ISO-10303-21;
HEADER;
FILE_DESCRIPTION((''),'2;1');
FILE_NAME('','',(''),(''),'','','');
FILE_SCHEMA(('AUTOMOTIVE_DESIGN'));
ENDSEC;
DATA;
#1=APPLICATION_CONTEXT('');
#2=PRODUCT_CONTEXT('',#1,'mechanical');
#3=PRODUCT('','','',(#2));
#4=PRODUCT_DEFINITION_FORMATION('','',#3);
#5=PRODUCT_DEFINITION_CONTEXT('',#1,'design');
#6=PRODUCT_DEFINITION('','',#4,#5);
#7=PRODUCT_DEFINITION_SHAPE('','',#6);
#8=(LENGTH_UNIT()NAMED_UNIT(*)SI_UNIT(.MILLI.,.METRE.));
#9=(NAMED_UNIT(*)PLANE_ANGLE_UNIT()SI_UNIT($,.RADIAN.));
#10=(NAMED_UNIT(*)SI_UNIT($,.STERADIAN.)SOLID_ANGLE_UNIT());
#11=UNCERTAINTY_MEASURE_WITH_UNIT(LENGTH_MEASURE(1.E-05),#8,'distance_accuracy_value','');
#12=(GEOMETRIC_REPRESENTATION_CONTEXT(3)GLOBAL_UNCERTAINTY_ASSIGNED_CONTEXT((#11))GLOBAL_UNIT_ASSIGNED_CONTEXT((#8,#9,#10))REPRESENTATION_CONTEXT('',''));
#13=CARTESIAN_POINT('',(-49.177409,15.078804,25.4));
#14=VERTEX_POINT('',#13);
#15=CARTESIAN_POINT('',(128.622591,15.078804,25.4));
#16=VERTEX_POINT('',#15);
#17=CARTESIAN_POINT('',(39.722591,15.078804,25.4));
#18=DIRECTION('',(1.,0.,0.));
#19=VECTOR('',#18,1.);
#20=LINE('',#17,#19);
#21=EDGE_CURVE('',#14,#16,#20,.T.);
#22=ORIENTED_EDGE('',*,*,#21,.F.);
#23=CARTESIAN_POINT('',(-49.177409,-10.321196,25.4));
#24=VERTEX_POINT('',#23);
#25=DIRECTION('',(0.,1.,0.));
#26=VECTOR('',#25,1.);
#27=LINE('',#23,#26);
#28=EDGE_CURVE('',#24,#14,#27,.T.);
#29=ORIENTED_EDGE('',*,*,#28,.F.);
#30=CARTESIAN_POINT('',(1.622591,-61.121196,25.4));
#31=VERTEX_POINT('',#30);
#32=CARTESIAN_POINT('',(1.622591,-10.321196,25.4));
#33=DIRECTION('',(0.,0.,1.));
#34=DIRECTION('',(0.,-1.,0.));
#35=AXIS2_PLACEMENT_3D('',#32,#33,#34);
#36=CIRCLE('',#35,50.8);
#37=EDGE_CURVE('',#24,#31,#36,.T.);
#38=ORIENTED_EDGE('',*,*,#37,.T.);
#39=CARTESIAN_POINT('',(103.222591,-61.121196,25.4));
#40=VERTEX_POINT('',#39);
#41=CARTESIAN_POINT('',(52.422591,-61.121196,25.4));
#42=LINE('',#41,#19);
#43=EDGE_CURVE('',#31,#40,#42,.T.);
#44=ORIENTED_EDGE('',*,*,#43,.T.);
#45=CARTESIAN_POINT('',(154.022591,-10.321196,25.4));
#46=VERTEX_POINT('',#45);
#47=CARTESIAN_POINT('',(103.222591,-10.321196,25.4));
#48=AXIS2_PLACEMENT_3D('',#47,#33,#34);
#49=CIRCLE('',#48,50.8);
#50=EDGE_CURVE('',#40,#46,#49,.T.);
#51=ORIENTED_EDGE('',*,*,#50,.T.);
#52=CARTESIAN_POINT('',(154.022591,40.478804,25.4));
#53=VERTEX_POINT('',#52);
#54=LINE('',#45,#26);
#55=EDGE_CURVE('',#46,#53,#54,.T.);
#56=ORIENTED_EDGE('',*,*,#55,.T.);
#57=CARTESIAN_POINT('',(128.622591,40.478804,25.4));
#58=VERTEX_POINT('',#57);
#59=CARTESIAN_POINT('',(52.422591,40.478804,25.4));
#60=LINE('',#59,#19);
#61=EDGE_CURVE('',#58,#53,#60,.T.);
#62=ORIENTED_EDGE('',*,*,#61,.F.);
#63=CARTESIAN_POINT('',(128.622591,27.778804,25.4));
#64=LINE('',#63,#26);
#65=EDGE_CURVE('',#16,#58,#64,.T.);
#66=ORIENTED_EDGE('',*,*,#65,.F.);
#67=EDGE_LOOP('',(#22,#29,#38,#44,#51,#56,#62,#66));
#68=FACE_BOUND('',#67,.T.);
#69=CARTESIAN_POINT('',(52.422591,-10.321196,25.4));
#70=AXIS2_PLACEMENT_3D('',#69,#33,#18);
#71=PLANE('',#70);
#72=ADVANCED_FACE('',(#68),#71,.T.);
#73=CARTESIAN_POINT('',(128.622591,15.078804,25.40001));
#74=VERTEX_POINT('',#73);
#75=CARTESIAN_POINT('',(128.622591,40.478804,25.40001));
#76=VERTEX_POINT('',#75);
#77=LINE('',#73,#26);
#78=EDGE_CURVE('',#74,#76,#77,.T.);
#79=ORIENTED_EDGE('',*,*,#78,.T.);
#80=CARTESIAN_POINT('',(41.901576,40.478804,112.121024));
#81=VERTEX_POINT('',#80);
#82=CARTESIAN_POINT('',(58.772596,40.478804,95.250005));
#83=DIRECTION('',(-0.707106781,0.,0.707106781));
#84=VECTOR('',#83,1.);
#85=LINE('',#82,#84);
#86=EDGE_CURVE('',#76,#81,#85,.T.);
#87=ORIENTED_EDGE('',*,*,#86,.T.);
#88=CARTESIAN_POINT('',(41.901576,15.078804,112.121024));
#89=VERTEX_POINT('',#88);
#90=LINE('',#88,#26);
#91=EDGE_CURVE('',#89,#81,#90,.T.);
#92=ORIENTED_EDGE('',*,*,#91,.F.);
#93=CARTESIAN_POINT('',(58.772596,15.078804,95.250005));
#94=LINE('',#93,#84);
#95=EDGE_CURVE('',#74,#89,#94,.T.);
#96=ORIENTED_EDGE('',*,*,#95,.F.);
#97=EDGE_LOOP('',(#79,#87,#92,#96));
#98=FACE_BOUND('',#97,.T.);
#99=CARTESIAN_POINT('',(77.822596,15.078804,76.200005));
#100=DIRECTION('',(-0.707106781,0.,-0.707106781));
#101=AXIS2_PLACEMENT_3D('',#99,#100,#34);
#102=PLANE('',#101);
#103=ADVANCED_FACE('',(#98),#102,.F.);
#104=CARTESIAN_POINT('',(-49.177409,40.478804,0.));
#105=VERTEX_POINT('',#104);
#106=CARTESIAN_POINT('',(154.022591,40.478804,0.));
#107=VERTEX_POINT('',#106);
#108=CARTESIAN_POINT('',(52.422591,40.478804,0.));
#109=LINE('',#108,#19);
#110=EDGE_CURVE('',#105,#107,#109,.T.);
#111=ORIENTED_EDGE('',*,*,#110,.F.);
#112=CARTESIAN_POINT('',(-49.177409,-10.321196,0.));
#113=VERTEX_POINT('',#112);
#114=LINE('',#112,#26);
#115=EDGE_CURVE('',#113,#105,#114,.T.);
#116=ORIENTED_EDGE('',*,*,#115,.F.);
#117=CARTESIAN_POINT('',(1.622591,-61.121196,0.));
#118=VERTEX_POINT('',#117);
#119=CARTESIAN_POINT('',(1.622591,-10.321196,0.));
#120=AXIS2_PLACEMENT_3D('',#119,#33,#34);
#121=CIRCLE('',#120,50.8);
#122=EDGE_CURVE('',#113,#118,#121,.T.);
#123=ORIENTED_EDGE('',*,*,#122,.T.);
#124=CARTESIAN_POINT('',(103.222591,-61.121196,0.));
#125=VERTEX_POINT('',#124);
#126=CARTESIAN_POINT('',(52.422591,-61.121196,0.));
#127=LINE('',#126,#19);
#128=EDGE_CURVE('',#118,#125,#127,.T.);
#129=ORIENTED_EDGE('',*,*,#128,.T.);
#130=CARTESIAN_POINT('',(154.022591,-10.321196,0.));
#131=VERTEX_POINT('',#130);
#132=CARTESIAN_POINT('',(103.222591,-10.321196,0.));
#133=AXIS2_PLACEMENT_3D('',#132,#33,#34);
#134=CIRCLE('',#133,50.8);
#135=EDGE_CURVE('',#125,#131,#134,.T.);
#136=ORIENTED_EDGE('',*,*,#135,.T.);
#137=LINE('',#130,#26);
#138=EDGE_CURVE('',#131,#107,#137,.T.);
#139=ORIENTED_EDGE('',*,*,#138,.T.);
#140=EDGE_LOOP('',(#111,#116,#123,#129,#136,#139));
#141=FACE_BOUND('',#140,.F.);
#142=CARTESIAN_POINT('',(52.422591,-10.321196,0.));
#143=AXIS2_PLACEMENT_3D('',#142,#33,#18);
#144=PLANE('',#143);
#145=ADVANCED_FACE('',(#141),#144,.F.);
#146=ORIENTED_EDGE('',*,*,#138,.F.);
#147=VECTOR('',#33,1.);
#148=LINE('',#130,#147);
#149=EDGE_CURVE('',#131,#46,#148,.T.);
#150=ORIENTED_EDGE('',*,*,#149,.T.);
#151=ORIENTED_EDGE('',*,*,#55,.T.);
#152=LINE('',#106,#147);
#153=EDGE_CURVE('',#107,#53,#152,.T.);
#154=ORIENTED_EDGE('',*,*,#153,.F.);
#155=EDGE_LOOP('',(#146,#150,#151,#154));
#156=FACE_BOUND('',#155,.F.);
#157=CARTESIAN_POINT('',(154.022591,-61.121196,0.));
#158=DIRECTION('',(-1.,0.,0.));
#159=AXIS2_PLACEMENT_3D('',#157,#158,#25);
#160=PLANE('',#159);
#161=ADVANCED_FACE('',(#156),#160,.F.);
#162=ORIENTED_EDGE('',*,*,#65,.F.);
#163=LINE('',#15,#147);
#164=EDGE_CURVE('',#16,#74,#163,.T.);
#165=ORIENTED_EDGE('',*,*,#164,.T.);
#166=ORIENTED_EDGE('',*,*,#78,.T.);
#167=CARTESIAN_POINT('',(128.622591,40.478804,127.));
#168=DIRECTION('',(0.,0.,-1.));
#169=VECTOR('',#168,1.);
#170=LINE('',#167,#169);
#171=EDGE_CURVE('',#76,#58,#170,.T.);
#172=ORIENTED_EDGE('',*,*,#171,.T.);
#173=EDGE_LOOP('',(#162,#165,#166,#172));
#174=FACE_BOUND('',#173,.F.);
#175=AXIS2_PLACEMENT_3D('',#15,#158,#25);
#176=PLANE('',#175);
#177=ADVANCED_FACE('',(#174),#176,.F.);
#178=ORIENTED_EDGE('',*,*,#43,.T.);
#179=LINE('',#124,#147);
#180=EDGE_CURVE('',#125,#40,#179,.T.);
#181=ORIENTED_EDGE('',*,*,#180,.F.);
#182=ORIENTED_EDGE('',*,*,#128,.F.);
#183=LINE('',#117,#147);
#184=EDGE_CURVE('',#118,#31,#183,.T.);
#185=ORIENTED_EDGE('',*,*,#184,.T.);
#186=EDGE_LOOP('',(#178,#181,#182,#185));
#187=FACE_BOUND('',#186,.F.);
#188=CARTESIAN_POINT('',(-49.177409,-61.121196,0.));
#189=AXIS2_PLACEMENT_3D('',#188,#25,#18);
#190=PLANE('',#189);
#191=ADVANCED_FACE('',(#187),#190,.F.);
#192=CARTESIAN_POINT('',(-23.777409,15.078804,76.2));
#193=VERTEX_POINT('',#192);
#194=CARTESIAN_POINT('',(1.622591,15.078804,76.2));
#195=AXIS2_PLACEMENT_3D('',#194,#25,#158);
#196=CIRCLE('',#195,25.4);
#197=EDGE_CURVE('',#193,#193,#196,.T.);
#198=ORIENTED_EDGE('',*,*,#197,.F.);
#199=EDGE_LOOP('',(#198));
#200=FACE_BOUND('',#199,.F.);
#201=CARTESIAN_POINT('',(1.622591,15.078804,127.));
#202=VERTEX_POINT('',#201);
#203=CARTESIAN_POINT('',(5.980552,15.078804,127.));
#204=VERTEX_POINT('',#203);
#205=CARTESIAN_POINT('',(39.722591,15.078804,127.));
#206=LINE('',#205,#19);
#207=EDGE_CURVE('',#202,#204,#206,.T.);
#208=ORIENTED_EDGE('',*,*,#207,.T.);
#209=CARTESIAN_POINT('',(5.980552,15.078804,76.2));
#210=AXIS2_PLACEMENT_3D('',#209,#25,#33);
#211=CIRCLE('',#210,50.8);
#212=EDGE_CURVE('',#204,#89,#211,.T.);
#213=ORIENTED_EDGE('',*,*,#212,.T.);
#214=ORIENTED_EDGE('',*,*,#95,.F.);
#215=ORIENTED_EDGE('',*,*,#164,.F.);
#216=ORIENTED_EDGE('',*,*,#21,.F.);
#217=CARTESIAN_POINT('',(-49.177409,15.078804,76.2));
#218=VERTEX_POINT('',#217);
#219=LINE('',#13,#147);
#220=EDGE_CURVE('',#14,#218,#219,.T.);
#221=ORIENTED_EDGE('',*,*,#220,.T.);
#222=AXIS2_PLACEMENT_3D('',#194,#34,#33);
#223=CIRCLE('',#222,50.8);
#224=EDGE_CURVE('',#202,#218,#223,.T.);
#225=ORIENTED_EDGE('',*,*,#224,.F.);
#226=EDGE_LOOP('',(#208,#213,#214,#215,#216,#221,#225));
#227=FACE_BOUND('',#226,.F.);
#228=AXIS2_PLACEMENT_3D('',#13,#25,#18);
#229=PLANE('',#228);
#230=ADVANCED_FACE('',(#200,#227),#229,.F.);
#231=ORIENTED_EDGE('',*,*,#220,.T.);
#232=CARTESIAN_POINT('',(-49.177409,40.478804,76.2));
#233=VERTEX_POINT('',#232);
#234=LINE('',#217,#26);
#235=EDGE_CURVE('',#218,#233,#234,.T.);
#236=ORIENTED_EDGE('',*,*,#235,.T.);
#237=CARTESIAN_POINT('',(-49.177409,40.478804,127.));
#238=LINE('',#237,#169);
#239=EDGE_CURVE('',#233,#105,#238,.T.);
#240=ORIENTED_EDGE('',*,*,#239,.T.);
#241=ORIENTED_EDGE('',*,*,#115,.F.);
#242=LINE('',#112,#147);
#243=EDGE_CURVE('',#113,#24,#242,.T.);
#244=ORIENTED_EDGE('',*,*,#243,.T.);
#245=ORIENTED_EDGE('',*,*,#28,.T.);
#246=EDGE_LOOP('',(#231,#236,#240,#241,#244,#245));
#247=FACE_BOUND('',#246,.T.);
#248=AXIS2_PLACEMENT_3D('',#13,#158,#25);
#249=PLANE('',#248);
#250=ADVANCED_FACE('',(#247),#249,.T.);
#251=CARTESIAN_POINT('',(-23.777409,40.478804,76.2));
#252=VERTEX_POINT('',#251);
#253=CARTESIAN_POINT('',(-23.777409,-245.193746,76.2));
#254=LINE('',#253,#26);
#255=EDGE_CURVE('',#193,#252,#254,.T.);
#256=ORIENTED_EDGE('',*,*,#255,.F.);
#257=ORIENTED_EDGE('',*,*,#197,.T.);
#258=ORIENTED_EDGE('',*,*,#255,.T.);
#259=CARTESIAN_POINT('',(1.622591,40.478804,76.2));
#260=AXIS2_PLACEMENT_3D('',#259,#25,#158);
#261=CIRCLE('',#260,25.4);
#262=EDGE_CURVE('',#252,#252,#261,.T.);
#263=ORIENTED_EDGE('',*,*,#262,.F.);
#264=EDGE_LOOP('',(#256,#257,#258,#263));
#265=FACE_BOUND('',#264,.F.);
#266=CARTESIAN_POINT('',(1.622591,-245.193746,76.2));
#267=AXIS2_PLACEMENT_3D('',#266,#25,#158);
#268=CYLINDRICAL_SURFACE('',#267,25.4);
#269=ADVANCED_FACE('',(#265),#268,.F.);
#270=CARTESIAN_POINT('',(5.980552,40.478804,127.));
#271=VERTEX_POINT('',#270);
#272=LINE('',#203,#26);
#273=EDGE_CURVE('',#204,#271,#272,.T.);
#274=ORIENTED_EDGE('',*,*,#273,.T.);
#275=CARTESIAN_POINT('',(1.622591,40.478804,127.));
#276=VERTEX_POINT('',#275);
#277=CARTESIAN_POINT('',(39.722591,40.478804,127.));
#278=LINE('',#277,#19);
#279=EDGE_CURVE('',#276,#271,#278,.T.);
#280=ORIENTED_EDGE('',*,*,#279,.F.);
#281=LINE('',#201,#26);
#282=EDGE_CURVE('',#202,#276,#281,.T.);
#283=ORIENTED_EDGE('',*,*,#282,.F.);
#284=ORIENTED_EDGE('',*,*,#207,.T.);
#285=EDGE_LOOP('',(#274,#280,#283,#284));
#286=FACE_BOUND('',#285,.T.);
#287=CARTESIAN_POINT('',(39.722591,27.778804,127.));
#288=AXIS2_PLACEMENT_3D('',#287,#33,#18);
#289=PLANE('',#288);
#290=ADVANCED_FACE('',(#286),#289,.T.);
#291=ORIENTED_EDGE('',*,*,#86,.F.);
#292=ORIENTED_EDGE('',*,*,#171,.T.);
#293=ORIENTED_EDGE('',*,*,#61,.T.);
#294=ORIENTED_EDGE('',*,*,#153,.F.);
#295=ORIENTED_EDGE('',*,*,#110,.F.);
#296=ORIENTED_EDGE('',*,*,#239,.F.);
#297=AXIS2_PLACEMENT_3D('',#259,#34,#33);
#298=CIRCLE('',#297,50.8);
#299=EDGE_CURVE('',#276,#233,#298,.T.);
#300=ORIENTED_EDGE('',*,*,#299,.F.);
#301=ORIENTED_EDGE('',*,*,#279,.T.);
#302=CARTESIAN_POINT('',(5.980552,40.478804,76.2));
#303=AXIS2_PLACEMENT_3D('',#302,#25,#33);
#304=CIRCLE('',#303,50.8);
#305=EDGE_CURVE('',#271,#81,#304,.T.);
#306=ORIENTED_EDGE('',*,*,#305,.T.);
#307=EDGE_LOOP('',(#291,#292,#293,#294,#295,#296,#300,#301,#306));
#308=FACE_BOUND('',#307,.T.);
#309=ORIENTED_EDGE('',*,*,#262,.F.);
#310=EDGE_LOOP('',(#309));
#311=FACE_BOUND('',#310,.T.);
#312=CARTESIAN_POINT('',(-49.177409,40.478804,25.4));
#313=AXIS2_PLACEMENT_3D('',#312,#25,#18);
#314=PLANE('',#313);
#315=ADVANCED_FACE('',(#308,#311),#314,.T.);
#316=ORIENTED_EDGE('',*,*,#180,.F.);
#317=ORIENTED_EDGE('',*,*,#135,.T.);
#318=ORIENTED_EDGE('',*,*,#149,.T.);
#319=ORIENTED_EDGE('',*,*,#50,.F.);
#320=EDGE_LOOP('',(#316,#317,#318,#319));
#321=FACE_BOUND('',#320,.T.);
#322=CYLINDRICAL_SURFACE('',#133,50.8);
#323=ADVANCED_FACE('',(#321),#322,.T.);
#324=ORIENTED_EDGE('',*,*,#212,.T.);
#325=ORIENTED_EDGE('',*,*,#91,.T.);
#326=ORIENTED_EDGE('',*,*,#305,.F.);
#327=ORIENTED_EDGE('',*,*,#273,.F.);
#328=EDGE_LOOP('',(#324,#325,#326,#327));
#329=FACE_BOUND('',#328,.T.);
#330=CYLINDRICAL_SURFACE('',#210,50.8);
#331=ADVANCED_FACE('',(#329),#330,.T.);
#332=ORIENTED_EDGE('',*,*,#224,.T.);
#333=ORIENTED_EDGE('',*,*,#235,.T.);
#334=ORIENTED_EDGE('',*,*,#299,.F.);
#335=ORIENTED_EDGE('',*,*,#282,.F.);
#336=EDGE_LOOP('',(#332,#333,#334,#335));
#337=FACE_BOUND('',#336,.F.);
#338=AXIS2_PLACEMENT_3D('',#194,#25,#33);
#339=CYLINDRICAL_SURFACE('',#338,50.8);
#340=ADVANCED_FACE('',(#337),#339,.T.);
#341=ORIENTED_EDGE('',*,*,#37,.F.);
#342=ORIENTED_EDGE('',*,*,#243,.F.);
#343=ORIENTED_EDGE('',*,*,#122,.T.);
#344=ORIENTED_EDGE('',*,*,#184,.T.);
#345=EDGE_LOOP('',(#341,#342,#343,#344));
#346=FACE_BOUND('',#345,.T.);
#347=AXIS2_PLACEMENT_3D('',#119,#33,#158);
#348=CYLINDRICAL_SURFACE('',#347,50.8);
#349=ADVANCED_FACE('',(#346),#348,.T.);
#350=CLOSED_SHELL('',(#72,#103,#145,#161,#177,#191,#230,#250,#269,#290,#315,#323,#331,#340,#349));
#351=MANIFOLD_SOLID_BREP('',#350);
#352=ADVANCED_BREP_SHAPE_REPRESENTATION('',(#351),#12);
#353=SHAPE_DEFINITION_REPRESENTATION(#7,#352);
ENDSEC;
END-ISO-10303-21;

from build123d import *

# Parameters (mm, degrees)
F0_W     = 203.2
F0_H     = 101.6
F1_DEPTH = 25.4
F2_R     = 50.8
F3_W     = 177.8
F3_H     = 25.4
F4_DEPTH = 25.4
F5_DEPTH = 101.6
F6_SIZE2 = 101.59999
F6_SIZE  = 101.59999
F7_R     = 50.8
F9_D     = 50.8


# Not quite as in the source:
# - a fillet or chamfer is up to 0.001 mm smaller than in the source, because OpenCascade refuses the exact size


with BuildPart() as f1:
    # F0 (on Top) → F1 (new body)
    with BuildSketch(Plane.XY):
        with Locations((52.4225905538, -10.3211964953)):
            Rectangle(F0_W, F0_H)
    extrude(amount=F1_DEPTH)

    # F2
    f2_edges = [f1.edges().sort_by_distance(p)[0] for p in [
        (-49.177409, -61.121196, 12.7),
        (154.022591, -61.121196, 12.7),
    ]]
    fillet(f2_edges, radius=F2_R)

    # F3 (on face) → F4 (join)
    with BuildSketch(Plane.XY.offset(25.4)):
        with Locations((39.7225905538, 27.7788035047)):
            Rectangle(F3_W, F3_H)
    extrude(amount=F4_DEPTH)

    # F3 (on face) → F5 (join)
    with BuildSketch(Plane.XY.offset(25.4)):
        with Locations((39.7225905538, 27.7788035047)):
            Rectangle(F3_W, F3_H)
    extrude(amount=F5_DEPTH)

    # F6 (size 101.6 and 101.6 in the source; OpenCascade refuses exactly that, so slightly less here)
    f6_edges = [f1.edges().sort_by_distance(p)[0] for p in [
        (128.622591, 27.778804, 127),
    ]]
    chamfer(f6_edges, length=F6_SIZE, length2=F6_SIZE2)

    # F7
    f7_edges = [f1.edges().sort_by_distance(p)[0] for p in [
        (-49.177409, 27.778804, 127),
        (27.022601, 27.778804, 127),
    ]]
    fillet(f7_edges, radius=F7_R)

    # F9 (through all)
    with Locations(Plane.XZ.offset(-15.0788035047)):
        with Locations((1.6225905538, 76.2)):
            Hole(F9_D / 2)


solid = f1.part
